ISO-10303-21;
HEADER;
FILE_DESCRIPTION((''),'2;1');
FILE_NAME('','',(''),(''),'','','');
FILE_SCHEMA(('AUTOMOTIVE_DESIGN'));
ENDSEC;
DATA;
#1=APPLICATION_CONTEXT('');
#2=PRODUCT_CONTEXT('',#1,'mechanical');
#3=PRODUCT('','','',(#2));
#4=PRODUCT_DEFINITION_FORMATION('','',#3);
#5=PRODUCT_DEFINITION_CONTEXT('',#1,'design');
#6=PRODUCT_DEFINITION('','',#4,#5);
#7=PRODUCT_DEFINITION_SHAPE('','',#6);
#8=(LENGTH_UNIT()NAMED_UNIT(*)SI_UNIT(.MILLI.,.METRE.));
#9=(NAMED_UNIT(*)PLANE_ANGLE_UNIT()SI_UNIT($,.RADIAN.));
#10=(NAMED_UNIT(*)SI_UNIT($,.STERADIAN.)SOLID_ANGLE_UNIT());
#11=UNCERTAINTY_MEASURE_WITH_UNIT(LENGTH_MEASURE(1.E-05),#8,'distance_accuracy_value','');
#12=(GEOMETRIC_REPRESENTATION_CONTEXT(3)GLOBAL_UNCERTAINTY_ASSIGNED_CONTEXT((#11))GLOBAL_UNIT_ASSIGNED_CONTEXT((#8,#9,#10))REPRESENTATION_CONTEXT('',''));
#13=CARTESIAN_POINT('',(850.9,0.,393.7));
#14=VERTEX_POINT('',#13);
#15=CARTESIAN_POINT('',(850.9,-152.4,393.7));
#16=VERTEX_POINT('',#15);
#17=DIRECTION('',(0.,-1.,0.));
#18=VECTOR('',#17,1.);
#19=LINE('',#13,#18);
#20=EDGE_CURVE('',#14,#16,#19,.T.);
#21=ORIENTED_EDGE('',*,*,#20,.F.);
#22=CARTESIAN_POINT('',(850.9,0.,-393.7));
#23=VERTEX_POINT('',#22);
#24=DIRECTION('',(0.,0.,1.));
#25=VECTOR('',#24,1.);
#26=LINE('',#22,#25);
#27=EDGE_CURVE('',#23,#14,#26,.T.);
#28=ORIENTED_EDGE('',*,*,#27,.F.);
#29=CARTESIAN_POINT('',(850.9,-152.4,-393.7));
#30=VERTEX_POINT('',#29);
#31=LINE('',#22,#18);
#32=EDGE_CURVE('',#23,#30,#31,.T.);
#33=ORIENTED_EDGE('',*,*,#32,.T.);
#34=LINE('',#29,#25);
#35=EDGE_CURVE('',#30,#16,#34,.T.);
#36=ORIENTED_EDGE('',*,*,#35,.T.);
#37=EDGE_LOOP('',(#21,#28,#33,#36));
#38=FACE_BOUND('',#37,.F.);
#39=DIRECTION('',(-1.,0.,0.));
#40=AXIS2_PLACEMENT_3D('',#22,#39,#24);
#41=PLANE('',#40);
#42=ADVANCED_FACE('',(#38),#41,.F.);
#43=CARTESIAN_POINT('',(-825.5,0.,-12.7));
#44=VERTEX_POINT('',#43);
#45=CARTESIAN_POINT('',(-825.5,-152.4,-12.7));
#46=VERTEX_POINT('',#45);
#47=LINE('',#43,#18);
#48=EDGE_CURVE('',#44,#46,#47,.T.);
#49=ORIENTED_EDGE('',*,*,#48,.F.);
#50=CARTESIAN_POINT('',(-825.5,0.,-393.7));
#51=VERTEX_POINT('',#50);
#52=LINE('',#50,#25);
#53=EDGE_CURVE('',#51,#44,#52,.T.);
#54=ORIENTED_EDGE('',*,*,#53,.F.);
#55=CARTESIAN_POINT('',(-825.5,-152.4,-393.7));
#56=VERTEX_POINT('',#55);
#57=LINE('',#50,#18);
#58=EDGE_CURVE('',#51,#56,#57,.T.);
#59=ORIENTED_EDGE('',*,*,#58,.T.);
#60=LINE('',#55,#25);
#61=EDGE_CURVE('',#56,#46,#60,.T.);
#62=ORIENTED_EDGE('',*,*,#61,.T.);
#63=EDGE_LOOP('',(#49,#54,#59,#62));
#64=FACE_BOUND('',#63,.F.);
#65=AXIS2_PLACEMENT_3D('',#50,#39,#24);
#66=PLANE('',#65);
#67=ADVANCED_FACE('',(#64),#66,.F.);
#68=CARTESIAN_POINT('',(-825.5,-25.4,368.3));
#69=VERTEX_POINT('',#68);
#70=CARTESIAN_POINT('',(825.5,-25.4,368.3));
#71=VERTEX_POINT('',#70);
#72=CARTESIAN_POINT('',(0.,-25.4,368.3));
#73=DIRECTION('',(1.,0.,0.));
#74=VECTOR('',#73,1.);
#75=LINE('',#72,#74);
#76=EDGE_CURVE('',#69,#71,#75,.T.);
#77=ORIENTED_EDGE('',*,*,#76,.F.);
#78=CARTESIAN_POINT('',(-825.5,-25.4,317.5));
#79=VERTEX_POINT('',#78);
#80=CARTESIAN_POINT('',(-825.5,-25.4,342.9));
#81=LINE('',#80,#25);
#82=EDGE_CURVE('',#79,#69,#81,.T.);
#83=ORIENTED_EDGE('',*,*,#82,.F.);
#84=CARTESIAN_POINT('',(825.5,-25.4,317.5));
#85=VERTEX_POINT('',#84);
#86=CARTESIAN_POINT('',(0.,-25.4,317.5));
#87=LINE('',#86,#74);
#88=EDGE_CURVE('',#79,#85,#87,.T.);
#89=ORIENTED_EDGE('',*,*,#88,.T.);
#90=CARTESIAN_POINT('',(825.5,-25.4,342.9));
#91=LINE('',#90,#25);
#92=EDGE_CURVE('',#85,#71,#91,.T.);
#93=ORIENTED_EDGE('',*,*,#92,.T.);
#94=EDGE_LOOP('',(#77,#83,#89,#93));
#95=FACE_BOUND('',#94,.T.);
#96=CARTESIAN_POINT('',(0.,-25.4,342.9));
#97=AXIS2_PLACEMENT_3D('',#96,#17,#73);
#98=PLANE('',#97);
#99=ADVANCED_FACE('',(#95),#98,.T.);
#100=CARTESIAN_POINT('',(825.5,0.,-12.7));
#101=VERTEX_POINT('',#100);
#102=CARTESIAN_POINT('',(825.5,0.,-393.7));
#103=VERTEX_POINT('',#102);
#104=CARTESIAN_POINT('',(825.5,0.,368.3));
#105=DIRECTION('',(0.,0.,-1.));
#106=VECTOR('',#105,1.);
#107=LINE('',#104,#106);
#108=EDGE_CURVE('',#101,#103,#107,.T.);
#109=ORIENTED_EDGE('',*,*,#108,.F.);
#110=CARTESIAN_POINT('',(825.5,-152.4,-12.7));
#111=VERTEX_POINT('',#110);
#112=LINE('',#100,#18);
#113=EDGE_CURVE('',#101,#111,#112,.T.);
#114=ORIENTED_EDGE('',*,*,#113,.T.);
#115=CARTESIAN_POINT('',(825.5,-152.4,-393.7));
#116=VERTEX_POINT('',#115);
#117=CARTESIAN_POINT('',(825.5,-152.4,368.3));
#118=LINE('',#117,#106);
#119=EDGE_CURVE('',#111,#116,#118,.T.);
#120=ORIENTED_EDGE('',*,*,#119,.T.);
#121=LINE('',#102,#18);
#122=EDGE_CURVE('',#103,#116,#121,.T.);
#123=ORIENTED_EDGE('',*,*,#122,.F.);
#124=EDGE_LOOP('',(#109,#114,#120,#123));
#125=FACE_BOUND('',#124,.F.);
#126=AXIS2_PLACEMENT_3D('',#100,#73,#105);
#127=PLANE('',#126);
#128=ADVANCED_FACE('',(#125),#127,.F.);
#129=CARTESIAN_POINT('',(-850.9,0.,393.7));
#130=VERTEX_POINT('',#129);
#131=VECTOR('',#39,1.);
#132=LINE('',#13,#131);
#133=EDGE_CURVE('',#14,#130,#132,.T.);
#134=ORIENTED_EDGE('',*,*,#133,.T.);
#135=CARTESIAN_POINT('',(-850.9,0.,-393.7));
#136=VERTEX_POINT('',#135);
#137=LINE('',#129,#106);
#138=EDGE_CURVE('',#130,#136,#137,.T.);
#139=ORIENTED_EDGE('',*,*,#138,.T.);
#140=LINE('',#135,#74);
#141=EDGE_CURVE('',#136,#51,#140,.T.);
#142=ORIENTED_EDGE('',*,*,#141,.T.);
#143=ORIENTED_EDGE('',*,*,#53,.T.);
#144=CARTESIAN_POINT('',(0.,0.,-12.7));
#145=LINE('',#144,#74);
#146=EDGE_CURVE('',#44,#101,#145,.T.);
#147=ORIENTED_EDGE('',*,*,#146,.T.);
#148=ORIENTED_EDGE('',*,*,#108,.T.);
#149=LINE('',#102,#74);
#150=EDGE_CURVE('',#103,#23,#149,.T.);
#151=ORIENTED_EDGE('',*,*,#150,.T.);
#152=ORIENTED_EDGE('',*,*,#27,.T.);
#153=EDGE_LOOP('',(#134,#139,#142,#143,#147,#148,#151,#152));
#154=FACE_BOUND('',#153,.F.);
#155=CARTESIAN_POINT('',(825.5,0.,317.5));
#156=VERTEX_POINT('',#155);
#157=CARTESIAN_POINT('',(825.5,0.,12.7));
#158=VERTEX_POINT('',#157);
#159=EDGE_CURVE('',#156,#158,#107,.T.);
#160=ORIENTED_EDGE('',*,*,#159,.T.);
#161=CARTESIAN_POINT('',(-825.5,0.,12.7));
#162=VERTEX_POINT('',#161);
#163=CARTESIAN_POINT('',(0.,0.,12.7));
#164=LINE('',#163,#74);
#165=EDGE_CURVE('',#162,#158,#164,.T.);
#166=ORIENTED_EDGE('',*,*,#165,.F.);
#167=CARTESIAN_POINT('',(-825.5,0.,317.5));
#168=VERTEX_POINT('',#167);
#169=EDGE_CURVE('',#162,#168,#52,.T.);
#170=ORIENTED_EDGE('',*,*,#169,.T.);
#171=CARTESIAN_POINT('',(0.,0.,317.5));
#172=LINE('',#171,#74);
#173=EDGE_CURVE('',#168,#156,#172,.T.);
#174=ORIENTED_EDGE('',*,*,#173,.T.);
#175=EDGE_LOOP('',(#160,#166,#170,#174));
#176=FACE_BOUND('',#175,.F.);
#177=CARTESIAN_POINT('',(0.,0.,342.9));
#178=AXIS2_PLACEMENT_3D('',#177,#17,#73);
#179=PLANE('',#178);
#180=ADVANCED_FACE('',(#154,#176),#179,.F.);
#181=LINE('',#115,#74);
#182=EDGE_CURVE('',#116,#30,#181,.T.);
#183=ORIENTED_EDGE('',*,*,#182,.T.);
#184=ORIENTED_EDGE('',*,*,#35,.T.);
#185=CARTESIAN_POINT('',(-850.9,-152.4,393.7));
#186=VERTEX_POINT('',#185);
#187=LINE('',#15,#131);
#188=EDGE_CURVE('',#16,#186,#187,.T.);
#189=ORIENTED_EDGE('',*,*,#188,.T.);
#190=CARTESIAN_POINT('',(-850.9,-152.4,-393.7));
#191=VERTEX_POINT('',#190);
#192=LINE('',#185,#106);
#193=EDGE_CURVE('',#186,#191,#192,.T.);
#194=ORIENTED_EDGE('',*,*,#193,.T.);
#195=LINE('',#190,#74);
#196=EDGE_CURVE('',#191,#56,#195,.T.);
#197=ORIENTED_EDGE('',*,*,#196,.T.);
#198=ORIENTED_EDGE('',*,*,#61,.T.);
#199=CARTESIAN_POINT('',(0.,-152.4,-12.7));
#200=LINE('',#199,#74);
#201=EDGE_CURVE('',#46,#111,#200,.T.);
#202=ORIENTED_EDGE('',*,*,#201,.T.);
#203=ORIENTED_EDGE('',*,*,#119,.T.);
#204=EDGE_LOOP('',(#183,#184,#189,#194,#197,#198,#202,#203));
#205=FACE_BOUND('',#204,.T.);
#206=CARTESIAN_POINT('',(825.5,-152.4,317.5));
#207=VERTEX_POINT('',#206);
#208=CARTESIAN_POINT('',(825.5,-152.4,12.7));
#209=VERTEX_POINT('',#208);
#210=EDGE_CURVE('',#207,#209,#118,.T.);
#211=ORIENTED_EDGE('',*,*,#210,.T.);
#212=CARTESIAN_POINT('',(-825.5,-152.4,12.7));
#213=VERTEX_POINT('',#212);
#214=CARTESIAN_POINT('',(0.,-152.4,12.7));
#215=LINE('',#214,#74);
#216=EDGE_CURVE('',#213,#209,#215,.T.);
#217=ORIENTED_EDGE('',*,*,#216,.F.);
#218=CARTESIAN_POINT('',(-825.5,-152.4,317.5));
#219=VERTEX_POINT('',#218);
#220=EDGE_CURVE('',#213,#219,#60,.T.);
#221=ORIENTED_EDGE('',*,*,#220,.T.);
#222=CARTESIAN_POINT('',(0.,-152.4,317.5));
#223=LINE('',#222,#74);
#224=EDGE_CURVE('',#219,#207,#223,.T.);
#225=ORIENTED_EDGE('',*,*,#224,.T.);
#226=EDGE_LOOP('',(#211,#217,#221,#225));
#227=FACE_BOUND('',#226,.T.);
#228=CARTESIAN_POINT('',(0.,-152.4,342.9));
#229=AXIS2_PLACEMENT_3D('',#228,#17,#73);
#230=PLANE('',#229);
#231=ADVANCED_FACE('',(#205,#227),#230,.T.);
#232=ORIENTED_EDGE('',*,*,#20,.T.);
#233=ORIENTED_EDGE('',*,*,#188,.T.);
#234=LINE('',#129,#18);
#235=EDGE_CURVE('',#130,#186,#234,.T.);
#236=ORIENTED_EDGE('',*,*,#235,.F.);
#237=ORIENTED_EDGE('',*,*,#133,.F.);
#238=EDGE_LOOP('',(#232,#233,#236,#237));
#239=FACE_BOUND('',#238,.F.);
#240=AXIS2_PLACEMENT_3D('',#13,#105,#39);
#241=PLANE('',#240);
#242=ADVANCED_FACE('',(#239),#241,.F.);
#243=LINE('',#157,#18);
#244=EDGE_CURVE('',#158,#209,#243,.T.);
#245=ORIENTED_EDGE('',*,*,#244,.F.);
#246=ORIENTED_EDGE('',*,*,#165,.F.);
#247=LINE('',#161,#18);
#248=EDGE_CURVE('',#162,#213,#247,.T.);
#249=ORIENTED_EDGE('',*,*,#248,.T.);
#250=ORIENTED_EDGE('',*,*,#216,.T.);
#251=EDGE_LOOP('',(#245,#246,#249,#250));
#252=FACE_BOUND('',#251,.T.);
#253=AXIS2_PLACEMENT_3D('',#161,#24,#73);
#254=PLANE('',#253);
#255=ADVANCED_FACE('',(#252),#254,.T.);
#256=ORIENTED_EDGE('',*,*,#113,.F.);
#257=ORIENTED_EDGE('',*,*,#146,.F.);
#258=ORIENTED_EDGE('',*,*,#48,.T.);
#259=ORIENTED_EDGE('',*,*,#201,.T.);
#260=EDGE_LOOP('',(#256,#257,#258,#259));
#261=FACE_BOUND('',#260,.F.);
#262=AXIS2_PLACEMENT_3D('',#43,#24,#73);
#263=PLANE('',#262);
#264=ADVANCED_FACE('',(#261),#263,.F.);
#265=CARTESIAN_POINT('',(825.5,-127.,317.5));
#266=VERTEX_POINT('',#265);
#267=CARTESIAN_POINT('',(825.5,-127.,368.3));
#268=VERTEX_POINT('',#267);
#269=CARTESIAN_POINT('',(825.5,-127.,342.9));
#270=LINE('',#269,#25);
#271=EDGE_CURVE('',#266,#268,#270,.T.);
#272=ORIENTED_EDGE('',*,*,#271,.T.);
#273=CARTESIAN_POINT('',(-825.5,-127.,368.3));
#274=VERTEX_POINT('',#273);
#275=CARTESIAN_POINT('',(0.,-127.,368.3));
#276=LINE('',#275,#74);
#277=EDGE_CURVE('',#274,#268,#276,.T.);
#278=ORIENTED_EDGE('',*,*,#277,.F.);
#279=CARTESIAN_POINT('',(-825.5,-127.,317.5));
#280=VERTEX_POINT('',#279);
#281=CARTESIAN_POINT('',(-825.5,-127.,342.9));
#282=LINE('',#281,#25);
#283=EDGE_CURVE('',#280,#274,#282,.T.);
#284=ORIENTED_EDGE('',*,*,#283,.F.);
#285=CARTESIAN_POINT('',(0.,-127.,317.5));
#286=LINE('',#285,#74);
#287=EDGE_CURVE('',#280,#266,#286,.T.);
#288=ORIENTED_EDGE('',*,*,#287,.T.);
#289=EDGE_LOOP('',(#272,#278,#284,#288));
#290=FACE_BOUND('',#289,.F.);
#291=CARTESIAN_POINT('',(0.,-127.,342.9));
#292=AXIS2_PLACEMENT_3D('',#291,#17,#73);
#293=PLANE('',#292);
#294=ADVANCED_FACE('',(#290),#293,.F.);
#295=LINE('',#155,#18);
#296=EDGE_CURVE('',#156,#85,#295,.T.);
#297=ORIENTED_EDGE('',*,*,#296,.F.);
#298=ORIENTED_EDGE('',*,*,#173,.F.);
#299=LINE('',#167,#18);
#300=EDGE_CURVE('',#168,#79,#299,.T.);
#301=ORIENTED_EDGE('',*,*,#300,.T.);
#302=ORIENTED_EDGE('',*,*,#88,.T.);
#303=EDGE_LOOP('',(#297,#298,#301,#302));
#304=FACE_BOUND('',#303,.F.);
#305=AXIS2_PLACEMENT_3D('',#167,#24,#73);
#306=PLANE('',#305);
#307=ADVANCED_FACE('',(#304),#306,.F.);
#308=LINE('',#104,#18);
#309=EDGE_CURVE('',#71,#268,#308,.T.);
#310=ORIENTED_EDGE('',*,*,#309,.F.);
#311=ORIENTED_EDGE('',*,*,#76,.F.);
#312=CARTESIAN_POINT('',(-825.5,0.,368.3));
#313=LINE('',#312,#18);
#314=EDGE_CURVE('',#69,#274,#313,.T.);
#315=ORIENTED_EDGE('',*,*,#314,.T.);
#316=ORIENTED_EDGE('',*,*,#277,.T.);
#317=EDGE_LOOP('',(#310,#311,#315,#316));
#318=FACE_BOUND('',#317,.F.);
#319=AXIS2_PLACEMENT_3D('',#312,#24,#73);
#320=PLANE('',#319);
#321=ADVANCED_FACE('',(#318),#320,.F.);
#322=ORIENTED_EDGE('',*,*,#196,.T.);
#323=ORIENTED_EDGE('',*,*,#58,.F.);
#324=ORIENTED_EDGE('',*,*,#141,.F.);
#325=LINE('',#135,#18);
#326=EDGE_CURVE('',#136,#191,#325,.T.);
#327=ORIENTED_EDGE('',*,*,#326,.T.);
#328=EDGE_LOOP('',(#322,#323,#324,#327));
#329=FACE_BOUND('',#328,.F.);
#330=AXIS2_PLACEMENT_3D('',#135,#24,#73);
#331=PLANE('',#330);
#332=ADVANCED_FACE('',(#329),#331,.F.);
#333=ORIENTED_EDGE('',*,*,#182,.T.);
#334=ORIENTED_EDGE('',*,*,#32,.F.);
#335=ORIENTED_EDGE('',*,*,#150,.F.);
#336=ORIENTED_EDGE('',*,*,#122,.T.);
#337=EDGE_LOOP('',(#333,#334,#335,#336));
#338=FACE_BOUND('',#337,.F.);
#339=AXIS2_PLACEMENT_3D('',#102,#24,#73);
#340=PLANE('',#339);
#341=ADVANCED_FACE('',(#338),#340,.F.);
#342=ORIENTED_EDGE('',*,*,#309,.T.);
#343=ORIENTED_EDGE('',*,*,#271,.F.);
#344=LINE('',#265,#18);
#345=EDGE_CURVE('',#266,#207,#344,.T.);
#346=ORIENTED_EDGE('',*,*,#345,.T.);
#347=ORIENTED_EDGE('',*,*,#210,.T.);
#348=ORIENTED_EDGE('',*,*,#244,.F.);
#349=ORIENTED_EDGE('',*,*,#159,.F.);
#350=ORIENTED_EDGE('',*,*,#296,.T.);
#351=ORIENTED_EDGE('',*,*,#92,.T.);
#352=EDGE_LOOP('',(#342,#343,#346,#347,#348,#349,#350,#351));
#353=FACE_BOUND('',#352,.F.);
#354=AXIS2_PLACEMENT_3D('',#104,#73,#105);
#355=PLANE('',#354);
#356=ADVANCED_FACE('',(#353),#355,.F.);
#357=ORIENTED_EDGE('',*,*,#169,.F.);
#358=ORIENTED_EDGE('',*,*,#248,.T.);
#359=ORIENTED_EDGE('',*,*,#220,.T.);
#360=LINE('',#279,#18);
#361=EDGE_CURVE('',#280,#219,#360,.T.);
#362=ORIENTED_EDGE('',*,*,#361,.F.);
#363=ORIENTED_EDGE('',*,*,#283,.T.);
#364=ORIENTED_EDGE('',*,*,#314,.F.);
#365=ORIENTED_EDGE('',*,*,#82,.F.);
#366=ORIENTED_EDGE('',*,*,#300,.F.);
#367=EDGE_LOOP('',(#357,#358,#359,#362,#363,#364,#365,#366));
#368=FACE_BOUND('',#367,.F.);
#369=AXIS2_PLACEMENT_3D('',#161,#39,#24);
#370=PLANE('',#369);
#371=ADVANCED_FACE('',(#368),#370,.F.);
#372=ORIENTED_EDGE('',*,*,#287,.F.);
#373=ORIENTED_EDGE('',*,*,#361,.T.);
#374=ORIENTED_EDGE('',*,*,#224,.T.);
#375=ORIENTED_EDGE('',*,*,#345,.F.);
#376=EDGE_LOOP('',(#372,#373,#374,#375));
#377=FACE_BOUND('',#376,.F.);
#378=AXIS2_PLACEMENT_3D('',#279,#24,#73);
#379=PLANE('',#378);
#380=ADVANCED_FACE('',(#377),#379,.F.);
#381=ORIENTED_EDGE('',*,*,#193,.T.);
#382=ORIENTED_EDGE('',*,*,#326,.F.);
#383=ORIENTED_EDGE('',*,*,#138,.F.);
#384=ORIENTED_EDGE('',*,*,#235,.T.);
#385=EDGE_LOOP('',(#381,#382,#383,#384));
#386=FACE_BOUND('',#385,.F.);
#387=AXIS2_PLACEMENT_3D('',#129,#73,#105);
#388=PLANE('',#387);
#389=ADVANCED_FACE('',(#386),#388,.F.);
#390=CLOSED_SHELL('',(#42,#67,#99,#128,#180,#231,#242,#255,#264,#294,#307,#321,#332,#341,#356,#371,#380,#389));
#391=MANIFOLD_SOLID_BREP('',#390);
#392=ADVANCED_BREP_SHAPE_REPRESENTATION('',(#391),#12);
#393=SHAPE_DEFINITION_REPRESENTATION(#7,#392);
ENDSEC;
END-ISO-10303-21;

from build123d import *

# Parameters (mm, degrees)
F0_W      = 1651
F0_H      = 25.4
F1_DEPTH  = 152.4
F0_H_2    = 50.8
F2_DEPTH  = 25.4
F3_START  = 101.6
F2_FACE_W = 1651
F2_FACE_H = 50.8
F3_DEPTH  = 25.4


# Not quite as in the source:
# - a feature names something its author has since deleted; it is built from what else it names


with BuildPart() as f1:
    # F0 (on Front) → F1 (new body)
    with BuildSketch(Plane.XZ):
        Polygon((-850.9, 368.3), (-850.9, -393.7), (-825.5, -393.7), (-825.5, -12.7), (-825.5, 12.7), (-825.5, 317.5), (-825.5, 368.3), align=None)
        Polygon((-850.9, 393.7), (-850.9, 368.3), (-825.5, 368.3), (825.5, 368.3), (850.9, 368.3), (850.9, 393.7), align=None)
        Polygon((825.5, 12.7), (825.5, -12.7), (825.5, -393.7), (850.9, -393.7), (850.9, 368.3), (825.5, 368.3), (825.5, 317.5), align=None)
        Rectangle(F0_W, F0_H)
    extrude(amount=F1_DEPTH)

    # F0 (on Front) → F2 (join)
    with BuildSketch(Plane.XZ):
        with Locations((0, 342.9)):
            Rectangle(F0_W, F0_H_2)
    extrude(amount=F2_DEPTH)

    # F2_face (on face) → F3 (join)
    with BuildSketch(Plane(origin=(0, -25.4, 342.9), x_dir=(1, 0, 0), z_dir=(0, -1, 0)).offset(F3_START)):
        Rectangle(F2_FACE_W, F2_FACE_H)
    extrude(amount=F3_DEPTH)


solid = f1.part
